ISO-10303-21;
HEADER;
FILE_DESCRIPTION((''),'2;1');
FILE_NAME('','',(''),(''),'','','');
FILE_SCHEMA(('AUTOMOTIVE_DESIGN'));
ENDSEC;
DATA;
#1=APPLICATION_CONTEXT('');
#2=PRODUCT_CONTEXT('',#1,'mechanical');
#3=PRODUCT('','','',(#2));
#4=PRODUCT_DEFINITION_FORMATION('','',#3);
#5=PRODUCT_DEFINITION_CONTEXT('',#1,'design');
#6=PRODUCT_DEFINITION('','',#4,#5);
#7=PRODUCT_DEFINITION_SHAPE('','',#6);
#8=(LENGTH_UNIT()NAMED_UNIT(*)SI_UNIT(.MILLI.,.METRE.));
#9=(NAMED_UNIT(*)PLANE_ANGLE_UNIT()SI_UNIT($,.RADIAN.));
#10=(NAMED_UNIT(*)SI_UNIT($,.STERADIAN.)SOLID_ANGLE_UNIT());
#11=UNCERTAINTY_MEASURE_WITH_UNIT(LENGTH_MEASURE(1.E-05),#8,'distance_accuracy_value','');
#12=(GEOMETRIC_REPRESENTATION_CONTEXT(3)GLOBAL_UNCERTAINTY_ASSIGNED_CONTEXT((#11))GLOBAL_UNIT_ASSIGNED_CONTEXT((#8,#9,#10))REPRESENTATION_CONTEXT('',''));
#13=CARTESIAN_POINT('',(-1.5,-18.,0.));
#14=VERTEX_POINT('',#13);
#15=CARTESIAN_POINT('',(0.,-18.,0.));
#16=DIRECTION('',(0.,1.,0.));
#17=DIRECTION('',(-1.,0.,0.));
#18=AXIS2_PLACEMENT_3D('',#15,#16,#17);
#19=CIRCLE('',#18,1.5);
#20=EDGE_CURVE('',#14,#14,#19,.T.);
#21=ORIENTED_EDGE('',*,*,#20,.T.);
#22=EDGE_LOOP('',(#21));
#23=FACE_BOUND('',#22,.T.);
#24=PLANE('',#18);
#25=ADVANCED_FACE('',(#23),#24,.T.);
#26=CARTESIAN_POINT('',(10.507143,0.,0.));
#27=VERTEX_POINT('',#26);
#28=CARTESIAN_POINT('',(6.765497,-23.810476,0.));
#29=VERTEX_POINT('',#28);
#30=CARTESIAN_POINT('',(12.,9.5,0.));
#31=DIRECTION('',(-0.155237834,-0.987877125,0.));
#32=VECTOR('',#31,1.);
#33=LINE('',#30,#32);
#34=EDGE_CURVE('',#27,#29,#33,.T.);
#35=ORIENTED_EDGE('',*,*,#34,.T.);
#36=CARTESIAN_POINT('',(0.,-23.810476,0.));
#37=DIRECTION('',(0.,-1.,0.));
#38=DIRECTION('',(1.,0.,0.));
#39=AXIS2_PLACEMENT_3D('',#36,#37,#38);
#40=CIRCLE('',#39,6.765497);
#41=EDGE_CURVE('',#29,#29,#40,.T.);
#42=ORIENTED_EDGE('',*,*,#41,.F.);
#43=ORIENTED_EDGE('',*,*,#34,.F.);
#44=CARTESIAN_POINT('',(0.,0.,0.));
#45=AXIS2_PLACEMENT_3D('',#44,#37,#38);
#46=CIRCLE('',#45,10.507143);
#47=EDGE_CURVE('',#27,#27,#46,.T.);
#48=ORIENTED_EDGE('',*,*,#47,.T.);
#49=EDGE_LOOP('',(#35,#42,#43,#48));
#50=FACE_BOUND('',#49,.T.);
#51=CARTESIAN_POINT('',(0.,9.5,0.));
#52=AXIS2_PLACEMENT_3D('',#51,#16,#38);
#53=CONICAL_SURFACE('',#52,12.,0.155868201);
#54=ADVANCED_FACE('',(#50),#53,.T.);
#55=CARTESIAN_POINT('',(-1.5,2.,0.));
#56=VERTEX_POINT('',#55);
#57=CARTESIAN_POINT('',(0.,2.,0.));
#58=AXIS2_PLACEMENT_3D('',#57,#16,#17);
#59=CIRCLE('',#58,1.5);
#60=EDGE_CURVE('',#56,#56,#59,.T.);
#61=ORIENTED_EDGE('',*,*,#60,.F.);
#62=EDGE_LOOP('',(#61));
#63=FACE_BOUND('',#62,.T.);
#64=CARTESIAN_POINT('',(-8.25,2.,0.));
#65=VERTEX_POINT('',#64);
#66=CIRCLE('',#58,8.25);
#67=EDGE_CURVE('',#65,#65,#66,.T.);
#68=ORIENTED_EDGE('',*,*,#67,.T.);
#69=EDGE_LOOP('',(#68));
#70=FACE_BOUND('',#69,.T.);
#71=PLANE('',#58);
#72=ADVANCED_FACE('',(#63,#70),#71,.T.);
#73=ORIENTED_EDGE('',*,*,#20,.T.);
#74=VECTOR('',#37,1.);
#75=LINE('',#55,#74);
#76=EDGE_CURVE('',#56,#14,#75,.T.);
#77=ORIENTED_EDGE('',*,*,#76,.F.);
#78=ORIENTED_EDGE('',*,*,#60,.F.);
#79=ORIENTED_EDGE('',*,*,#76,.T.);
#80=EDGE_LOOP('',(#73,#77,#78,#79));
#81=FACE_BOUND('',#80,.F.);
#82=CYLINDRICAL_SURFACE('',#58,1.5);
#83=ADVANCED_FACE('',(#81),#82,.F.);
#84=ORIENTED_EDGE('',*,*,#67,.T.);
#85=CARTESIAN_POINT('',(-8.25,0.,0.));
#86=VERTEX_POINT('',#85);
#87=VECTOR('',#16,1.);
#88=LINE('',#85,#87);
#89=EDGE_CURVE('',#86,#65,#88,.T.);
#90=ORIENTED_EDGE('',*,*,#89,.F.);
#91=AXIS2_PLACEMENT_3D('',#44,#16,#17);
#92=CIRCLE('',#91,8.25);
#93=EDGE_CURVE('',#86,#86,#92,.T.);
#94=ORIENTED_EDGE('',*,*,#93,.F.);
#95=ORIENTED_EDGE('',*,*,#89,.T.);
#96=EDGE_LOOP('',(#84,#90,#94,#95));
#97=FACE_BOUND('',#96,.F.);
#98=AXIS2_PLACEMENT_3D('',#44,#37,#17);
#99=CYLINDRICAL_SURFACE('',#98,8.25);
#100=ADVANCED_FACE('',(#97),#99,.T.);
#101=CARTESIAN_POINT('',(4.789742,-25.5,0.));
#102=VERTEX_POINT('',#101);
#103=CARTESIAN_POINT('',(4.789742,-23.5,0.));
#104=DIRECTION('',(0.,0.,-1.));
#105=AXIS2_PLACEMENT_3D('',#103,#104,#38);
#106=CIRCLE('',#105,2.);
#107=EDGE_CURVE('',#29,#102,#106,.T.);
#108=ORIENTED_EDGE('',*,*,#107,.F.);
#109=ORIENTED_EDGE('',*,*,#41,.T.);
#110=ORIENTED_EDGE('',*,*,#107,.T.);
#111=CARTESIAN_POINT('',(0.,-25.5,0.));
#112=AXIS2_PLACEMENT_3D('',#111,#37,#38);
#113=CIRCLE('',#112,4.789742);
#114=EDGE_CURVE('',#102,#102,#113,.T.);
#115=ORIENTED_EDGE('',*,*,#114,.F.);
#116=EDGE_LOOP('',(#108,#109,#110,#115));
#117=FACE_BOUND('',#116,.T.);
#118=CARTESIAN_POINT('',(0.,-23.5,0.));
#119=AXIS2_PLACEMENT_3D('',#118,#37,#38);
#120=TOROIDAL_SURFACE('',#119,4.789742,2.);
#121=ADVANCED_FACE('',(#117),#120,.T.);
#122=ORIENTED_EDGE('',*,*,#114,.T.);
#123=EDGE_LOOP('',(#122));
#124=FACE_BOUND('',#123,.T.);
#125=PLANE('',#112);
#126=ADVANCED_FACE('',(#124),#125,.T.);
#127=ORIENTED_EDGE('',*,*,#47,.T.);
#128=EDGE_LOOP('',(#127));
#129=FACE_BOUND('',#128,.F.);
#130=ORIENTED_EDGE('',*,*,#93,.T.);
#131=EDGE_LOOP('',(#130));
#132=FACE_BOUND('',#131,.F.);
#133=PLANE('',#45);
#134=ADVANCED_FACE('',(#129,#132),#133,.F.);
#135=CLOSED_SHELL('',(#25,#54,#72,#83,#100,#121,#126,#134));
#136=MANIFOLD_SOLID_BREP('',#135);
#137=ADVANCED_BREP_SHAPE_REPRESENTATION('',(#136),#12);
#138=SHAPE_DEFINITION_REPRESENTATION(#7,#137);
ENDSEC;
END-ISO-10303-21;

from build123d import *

# Parameters (mm, degrees)
F0_R     = 12
F1_DEPTH = 25.5
F3_R     = 2
F4_R     = 8.25
F5_DEPTH = 2
F6_R     = 1.5
F7_DEPTH = 20


# Not quite as in the source:
# - a fillet or chamfer that OpenCascade refuses, or shapes differently, is made with other operations: its cross-section is extruded or revolved along the edge and cut away or added


with BuildPart() as f1:
    # F0 (on Front) → F1 (new body)
    with BuildSketch(Plane.XZ):
        Circle(F0_R)
    extrude(amount=F1_DEPTH)

    # F2: chamfer of 5.5 x 35 on 1 edges, made by hand

    # F2_s1 → F2_t2 (revolve, cut)
    with BuildSketch(Plane.XY):
        Polygon((12, 9.5), (6.5, -25.5), (12, -25.5), align=None)
    revolve(axis=Axis((0, -25.5, 0), (0, -1, 0)), mode=Mode.SUBTRACT)

    # F3
    f3_edges = [f1.edges().sort_by_distance(p)[0] for p in [
        (-6.5, -25.5, 0),
    ]]
    fillet(f3_edges, radius=F3_R)

    # F4 (on face) → F5 (join)
    with BuildSketch(Plane(origin=(0, 0, 0), x_dir=(-1, 0, 0), z_dir=(0, 1, 0))):
        Circle(F4_R)
    extrude(amount=F5_DEPTH)

    # F6 (on face) → F7 (cut)
    with BuildSketch(Plane(origin=(0, 2, 0), x_dir=(-1, 0, 0), z_dir=(0, 1, 0))):
        Circle(F6_R)
    extrude(amount=-F7_DEPTH, mode=Mode.SUBTRACT)


solid = f1.part
